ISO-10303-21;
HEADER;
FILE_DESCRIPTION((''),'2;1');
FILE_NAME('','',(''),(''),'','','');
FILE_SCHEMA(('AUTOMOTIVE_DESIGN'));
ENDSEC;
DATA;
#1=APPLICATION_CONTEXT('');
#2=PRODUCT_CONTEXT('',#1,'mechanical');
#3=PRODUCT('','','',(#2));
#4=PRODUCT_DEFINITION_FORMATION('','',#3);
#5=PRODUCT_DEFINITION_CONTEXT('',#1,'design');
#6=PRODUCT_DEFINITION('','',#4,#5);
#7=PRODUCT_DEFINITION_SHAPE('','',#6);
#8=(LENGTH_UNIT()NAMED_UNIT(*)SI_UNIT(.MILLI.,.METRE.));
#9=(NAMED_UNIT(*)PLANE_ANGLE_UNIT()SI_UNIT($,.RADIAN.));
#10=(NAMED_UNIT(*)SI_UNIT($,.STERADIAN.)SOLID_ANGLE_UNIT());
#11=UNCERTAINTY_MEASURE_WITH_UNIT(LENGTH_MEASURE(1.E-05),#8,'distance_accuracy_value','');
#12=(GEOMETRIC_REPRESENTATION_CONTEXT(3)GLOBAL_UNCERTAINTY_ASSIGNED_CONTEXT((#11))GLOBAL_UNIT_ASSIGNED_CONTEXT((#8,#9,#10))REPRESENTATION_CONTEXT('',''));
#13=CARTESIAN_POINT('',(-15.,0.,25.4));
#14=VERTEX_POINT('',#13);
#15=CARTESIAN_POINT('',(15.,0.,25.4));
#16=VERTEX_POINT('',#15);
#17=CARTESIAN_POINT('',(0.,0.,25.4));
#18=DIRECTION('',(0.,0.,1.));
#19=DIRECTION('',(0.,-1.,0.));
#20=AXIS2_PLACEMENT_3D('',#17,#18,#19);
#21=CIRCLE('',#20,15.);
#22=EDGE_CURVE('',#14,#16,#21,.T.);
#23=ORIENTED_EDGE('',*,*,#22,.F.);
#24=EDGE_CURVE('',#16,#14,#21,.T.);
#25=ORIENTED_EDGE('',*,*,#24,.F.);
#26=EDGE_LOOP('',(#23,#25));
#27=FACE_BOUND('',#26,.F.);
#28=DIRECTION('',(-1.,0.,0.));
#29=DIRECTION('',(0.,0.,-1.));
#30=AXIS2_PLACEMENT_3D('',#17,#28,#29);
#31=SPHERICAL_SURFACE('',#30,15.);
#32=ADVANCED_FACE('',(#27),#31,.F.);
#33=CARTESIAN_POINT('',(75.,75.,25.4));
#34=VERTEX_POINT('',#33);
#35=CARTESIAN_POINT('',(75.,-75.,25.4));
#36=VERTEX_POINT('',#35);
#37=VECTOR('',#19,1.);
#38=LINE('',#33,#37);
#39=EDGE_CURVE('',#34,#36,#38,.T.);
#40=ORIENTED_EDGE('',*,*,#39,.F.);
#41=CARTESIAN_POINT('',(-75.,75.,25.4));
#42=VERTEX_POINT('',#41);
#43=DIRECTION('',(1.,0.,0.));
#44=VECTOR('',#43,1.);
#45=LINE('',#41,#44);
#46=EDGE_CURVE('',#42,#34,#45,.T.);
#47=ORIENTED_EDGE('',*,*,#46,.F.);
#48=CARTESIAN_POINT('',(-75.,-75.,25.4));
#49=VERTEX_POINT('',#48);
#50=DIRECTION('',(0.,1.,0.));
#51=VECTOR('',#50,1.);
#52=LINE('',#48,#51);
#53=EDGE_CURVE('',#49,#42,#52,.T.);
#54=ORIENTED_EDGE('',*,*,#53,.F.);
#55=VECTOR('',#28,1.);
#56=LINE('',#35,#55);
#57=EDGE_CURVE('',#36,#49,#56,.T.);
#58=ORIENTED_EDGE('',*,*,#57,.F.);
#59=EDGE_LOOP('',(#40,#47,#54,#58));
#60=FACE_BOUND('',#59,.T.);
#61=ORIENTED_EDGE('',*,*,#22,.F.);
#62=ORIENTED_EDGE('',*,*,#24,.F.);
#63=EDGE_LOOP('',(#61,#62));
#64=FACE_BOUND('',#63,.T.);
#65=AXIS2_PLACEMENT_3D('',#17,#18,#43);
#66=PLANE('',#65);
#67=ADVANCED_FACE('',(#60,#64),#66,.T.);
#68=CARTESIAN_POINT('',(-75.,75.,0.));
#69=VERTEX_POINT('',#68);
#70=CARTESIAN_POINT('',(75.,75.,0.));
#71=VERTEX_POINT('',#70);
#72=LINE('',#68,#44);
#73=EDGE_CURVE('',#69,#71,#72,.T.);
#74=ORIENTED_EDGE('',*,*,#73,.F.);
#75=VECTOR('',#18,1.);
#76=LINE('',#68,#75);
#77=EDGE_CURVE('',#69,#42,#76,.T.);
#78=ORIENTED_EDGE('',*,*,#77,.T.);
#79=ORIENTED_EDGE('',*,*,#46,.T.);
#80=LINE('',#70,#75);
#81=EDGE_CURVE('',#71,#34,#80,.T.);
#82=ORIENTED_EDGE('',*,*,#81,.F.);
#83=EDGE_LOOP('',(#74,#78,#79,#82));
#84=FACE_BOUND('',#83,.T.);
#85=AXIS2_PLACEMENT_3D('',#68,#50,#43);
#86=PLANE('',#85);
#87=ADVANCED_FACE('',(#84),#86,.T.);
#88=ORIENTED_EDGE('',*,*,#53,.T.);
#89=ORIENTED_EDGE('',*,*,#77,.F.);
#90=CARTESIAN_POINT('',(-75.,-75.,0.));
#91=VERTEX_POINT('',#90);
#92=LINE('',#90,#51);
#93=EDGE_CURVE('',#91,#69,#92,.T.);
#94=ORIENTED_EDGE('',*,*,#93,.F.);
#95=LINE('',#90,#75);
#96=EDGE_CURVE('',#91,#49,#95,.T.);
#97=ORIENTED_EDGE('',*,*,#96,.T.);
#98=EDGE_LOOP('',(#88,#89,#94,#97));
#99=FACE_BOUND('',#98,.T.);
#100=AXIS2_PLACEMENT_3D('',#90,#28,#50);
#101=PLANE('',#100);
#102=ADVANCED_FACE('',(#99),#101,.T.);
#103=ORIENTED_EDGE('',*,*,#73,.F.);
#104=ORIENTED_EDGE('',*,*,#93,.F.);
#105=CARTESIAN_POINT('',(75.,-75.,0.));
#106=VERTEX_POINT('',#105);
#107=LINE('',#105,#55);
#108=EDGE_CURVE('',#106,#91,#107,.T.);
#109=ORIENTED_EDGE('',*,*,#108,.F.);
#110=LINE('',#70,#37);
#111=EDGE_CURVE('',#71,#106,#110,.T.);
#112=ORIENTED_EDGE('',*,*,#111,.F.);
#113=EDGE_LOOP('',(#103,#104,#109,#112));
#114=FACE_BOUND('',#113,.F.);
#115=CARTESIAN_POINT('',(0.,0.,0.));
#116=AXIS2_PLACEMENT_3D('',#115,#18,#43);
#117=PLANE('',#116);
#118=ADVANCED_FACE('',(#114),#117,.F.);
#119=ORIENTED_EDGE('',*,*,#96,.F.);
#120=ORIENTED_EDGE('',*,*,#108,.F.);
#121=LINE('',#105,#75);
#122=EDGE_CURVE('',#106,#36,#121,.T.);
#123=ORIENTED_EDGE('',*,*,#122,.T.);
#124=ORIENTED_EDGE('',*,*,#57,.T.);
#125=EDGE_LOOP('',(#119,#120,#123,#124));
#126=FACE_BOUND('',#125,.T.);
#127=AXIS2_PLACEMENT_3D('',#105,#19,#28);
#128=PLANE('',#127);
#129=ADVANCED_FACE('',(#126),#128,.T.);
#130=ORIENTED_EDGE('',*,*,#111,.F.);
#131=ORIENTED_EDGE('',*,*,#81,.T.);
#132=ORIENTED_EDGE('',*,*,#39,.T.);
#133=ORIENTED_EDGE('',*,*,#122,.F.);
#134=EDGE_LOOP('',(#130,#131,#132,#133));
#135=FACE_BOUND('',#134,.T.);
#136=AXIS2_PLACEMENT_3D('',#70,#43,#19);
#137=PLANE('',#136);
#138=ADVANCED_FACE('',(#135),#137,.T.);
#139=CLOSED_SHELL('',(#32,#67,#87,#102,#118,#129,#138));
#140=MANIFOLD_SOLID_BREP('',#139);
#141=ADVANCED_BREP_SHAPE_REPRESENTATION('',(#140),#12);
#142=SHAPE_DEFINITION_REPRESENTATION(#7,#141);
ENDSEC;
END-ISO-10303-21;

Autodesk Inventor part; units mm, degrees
sketch "Boceto1" plane through (0, 0, 0) normal (0, 0, 1) x (1, 0, 0)
  line L0 (-75, 75) -> (75, 75)
  line L1 (75, 75) -> (75, -75)
  line L2 (75, -75) -> (-75, -75)
  line L3 (-75, -75) -> (-75, 75)
  line L4 (-75, 75) -> (75, -75) construction
  line L5 (75, 75) -> (-75, -75) construction
  point P0 (0, 0)
  dimension "d0" = 150
  dimension "d1" = 150
extrude "Extrusión1" add sketch "Boceto1" along normal blind 25.4
sketch "Boceto3" plane through (0, 0, 0) normal (0, 1, 0) x (-1, 0, 0)
  line L0 (-75, 25.4) -> (75, 25.4) projected
  arc A0 (-15, 25.4) -> (15, 25.4) centre (0, 25.4) ccw
  line L1 (15, 25.4) -> (-15, 25.4)
  point P0 (0, 0)
  dimension "d7" = 15
revolve "Revolución2" cut sketch "Boceto3" angle 360 about axis through (75, 0, 25.4) along (-1, 0, 0)
properties part number "Placa - Bolsillo Esfera Radio 15 mm"
